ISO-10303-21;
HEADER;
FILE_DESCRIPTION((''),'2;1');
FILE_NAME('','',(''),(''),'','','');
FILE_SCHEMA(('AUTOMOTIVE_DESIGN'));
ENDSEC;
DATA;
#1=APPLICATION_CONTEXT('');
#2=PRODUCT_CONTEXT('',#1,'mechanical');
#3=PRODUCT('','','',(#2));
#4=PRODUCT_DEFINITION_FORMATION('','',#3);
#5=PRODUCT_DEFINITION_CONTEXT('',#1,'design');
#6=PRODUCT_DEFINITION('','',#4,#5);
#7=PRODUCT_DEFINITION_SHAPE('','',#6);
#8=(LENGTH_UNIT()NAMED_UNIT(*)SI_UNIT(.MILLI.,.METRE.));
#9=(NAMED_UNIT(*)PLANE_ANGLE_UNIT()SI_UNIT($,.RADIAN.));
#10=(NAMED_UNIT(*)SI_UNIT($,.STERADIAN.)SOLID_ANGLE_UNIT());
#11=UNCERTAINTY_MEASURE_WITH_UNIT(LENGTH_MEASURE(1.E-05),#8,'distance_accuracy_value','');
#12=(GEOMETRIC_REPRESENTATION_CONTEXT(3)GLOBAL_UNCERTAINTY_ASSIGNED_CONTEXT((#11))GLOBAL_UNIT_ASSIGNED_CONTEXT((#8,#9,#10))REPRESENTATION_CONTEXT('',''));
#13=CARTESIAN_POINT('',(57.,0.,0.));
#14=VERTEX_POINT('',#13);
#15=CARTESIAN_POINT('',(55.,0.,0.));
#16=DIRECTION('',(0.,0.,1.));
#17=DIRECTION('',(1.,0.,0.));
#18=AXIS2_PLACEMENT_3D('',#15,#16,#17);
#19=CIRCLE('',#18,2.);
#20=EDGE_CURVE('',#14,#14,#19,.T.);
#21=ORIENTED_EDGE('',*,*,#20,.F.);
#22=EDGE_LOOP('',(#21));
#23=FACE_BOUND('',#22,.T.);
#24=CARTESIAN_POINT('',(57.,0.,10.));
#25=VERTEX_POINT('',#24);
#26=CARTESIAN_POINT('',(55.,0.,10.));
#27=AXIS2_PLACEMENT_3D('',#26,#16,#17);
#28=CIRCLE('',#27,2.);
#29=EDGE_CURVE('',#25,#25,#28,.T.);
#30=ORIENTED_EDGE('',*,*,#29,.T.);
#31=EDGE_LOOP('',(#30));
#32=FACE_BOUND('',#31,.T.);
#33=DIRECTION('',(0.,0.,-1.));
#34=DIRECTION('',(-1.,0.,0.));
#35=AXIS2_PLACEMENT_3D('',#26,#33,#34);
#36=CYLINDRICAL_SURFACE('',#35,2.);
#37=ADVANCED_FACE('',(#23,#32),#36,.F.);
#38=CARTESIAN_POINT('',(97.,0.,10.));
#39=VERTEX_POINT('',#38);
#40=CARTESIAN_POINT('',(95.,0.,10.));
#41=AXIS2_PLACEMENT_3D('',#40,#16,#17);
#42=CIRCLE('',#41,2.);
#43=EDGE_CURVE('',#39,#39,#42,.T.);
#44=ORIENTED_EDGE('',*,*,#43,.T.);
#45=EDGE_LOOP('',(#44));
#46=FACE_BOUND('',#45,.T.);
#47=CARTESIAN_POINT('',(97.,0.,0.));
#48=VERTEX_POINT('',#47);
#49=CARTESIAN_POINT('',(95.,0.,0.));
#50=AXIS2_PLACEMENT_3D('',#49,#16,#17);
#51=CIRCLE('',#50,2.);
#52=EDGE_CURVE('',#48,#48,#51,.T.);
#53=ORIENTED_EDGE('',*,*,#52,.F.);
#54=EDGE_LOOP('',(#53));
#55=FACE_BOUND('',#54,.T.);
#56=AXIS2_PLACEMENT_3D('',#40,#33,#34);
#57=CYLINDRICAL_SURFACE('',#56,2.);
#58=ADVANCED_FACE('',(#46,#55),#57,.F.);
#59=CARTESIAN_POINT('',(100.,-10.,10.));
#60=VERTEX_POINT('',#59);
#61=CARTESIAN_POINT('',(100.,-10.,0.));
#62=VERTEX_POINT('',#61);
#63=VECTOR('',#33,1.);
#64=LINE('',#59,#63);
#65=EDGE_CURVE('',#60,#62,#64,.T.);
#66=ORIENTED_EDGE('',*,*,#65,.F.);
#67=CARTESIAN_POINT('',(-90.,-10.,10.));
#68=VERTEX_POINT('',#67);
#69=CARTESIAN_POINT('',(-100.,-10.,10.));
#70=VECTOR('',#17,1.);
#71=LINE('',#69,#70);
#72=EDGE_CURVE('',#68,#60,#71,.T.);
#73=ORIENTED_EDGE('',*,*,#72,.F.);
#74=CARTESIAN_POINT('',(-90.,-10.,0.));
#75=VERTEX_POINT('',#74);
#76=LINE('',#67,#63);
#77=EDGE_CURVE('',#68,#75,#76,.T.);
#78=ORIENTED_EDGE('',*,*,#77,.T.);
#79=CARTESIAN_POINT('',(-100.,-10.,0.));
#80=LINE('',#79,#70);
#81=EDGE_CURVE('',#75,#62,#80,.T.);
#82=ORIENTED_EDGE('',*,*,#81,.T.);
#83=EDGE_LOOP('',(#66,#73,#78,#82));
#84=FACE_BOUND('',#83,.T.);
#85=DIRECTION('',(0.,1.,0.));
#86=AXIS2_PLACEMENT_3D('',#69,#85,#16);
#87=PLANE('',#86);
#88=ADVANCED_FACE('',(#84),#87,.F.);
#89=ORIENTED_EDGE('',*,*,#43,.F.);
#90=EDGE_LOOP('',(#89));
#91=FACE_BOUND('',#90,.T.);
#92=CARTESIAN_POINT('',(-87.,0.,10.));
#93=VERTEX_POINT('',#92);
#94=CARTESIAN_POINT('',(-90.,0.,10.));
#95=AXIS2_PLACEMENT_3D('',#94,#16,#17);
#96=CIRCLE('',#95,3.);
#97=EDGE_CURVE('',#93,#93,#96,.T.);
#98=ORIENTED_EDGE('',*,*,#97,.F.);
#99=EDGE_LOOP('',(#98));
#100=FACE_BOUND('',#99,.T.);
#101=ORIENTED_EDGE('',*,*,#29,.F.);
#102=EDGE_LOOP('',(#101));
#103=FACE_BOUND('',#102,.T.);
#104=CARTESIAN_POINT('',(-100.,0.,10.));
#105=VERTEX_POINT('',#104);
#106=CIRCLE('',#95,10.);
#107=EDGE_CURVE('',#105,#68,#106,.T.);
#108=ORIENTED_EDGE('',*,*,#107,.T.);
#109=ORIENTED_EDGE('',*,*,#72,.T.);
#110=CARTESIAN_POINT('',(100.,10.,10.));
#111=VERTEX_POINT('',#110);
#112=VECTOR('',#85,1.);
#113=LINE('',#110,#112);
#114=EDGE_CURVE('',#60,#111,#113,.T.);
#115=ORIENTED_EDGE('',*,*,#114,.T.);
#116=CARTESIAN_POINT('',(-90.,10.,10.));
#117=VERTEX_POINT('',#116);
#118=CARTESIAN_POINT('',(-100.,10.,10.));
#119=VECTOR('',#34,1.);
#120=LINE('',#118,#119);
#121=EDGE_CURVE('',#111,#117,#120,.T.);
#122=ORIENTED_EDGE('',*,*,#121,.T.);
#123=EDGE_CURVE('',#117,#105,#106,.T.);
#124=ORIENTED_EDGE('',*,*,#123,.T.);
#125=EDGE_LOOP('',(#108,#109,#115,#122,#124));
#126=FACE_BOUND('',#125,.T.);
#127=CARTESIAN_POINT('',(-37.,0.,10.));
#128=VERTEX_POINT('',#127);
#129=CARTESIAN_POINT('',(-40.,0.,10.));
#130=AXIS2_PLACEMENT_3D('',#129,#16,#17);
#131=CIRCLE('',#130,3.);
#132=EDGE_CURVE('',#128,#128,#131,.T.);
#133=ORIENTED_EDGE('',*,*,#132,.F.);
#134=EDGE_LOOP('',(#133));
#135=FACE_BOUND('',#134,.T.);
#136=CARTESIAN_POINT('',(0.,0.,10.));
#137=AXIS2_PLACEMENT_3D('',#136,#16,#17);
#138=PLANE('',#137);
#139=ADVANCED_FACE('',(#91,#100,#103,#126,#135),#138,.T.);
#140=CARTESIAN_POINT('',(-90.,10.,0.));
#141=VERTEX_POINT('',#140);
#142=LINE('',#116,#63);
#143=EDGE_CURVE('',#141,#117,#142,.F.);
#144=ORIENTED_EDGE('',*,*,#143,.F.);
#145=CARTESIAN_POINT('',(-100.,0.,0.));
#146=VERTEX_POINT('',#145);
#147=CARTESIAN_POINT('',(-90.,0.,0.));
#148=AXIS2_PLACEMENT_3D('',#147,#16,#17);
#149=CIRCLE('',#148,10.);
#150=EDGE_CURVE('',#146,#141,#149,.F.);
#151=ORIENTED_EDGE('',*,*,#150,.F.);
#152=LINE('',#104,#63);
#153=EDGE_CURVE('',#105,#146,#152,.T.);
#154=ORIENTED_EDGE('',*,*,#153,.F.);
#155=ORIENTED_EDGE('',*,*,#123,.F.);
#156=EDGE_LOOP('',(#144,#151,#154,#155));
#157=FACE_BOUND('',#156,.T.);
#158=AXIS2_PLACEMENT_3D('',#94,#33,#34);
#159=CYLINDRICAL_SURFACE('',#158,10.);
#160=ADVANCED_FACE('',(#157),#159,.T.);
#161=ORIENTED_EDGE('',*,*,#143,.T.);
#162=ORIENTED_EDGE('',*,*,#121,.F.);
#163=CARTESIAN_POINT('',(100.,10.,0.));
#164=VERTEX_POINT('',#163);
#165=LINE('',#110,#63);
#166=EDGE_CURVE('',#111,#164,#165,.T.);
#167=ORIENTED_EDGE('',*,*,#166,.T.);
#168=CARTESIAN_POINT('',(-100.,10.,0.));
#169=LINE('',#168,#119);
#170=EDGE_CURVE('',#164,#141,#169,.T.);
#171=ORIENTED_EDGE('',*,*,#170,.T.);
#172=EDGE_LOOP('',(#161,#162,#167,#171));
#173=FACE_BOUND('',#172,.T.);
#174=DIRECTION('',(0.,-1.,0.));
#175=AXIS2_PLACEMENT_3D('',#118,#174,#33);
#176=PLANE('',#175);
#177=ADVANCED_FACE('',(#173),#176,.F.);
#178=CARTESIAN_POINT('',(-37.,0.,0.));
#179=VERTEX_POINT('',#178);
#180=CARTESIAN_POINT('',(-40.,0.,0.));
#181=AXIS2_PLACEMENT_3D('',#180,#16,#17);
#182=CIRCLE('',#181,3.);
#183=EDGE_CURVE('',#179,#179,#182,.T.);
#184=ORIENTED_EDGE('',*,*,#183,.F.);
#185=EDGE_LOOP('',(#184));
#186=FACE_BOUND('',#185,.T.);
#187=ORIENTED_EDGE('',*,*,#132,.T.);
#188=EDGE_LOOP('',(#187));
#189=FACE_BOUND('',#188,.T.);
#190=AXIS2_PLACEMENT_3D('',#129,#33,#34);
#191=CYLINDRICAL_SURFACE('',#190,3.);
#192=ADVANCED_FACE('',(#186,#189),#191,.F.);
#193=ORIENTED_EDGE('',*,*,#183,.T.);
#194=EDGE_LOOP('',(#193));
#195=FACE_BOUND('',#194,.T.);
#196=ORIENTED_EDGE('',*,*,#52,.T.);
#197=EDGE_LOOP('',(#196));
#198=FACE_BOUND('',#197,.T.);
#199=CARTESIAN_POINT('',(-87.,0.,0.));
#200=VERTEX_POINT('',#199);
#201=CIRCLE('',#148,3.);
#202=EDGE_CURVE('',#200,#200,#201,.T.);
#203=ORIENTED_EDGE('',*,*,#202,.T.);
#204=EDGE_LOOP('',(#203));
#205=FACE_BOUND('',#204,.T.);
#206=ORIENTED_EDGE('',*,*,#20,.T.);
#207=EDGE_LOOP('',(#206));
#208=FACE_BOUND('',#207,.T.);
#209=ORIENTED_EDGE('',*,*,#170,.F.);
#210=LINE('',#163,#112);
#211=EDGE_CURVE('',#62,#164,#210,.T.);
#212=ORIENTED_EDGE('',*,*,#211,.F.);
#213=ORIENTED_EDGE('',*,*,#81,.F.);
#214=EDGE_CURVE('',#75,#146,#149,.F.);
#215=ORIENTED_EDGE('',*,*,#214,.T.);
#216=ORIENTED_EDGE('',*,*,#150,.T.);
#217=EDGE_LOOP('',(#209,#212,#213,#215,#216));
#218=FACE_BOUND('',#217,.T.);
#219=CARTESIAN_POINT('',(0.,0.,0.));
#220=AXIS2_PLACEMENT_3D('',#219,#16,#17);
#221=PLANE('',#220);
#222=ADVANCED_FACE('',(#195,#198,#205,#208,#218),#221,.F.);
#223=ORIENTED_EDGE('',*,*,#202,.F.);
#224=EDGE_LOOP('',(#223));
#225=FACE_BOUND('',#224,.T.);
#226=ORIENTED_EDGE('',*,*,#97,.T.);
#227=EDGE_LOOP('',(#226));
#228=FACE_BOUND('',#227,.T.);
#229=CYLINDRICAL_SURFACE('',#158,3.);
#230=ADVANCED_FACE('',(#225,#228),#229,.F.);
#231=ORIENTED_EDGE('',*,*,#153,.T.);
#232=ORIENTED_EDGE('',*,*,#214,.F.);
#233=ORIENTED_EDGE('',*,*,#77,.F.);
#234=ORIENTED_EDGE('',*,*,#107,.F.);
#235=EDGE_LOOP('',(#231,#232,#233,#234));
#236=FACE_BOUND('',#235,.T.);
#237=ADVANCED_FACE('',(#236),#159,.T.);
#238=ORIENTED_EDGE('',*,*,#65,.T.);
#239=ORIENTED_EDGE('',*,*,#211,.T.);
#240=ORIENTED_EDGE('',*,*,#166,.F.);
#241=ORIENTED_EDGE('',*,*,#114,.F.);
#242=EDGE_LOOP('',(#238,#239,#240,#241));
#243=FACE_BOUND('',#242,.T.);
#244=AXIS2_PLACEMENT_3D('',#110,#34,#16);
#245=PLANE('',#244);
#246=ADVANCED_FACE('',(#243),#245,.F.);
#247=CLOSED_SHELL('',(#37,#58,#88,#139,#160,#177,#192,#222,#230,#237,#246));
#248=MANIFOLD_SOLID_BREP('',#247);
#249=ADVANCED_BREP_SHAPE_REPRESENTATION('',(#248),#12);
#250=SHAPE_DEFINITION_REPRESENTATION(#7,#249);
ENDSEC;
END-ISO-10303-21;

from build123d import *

# Parameters (mm, degrees)
SKETCH1_W           = 200
SKETCH1_H           = 20
SKETCH1_R           = 3
SKETCH1_R_2         = 2
BOSS_EXTRUDE1_DEPTH = 10
FILLET1_R           = 10


with BuildPart() as part:
    # Sketch1 → Boss-Extrude1 (new body)
    with BuildSketch(Plane.XY):
        Rectangle(SKETCH1_W, SKETCH1_H)
        with Locations((-90, 0)):
            Circle(SKETCH1_R, mode=Mode.SUBTRACT)
        with Locations((-40, 0)):
            Circle(SKETCH1_R, mode=Mode.SUBTRACT)
        with Locations((95, 0)):
            Circle(SKETCH1_R_2, mode=Mode.SUBTRACT)
        with Locations((55, 0)):
            Circle(SKETCH1_R_2, mode=Mode.SUBTRACT)
    extrude(amount=BOSS_EXTRUDE1_DEPTH)

    # Fillet1
    fillet1_edges = [part.edges().sort_by_distance(p)[0] for p in [
        (-100, -10, 5),
        (-100, 10, 5),
    ]]
    fillet(fillet1_edges, radius=FILLET1_R - 0.0001)  # a hair under: the kernel refuses the full size


solid = part.part
